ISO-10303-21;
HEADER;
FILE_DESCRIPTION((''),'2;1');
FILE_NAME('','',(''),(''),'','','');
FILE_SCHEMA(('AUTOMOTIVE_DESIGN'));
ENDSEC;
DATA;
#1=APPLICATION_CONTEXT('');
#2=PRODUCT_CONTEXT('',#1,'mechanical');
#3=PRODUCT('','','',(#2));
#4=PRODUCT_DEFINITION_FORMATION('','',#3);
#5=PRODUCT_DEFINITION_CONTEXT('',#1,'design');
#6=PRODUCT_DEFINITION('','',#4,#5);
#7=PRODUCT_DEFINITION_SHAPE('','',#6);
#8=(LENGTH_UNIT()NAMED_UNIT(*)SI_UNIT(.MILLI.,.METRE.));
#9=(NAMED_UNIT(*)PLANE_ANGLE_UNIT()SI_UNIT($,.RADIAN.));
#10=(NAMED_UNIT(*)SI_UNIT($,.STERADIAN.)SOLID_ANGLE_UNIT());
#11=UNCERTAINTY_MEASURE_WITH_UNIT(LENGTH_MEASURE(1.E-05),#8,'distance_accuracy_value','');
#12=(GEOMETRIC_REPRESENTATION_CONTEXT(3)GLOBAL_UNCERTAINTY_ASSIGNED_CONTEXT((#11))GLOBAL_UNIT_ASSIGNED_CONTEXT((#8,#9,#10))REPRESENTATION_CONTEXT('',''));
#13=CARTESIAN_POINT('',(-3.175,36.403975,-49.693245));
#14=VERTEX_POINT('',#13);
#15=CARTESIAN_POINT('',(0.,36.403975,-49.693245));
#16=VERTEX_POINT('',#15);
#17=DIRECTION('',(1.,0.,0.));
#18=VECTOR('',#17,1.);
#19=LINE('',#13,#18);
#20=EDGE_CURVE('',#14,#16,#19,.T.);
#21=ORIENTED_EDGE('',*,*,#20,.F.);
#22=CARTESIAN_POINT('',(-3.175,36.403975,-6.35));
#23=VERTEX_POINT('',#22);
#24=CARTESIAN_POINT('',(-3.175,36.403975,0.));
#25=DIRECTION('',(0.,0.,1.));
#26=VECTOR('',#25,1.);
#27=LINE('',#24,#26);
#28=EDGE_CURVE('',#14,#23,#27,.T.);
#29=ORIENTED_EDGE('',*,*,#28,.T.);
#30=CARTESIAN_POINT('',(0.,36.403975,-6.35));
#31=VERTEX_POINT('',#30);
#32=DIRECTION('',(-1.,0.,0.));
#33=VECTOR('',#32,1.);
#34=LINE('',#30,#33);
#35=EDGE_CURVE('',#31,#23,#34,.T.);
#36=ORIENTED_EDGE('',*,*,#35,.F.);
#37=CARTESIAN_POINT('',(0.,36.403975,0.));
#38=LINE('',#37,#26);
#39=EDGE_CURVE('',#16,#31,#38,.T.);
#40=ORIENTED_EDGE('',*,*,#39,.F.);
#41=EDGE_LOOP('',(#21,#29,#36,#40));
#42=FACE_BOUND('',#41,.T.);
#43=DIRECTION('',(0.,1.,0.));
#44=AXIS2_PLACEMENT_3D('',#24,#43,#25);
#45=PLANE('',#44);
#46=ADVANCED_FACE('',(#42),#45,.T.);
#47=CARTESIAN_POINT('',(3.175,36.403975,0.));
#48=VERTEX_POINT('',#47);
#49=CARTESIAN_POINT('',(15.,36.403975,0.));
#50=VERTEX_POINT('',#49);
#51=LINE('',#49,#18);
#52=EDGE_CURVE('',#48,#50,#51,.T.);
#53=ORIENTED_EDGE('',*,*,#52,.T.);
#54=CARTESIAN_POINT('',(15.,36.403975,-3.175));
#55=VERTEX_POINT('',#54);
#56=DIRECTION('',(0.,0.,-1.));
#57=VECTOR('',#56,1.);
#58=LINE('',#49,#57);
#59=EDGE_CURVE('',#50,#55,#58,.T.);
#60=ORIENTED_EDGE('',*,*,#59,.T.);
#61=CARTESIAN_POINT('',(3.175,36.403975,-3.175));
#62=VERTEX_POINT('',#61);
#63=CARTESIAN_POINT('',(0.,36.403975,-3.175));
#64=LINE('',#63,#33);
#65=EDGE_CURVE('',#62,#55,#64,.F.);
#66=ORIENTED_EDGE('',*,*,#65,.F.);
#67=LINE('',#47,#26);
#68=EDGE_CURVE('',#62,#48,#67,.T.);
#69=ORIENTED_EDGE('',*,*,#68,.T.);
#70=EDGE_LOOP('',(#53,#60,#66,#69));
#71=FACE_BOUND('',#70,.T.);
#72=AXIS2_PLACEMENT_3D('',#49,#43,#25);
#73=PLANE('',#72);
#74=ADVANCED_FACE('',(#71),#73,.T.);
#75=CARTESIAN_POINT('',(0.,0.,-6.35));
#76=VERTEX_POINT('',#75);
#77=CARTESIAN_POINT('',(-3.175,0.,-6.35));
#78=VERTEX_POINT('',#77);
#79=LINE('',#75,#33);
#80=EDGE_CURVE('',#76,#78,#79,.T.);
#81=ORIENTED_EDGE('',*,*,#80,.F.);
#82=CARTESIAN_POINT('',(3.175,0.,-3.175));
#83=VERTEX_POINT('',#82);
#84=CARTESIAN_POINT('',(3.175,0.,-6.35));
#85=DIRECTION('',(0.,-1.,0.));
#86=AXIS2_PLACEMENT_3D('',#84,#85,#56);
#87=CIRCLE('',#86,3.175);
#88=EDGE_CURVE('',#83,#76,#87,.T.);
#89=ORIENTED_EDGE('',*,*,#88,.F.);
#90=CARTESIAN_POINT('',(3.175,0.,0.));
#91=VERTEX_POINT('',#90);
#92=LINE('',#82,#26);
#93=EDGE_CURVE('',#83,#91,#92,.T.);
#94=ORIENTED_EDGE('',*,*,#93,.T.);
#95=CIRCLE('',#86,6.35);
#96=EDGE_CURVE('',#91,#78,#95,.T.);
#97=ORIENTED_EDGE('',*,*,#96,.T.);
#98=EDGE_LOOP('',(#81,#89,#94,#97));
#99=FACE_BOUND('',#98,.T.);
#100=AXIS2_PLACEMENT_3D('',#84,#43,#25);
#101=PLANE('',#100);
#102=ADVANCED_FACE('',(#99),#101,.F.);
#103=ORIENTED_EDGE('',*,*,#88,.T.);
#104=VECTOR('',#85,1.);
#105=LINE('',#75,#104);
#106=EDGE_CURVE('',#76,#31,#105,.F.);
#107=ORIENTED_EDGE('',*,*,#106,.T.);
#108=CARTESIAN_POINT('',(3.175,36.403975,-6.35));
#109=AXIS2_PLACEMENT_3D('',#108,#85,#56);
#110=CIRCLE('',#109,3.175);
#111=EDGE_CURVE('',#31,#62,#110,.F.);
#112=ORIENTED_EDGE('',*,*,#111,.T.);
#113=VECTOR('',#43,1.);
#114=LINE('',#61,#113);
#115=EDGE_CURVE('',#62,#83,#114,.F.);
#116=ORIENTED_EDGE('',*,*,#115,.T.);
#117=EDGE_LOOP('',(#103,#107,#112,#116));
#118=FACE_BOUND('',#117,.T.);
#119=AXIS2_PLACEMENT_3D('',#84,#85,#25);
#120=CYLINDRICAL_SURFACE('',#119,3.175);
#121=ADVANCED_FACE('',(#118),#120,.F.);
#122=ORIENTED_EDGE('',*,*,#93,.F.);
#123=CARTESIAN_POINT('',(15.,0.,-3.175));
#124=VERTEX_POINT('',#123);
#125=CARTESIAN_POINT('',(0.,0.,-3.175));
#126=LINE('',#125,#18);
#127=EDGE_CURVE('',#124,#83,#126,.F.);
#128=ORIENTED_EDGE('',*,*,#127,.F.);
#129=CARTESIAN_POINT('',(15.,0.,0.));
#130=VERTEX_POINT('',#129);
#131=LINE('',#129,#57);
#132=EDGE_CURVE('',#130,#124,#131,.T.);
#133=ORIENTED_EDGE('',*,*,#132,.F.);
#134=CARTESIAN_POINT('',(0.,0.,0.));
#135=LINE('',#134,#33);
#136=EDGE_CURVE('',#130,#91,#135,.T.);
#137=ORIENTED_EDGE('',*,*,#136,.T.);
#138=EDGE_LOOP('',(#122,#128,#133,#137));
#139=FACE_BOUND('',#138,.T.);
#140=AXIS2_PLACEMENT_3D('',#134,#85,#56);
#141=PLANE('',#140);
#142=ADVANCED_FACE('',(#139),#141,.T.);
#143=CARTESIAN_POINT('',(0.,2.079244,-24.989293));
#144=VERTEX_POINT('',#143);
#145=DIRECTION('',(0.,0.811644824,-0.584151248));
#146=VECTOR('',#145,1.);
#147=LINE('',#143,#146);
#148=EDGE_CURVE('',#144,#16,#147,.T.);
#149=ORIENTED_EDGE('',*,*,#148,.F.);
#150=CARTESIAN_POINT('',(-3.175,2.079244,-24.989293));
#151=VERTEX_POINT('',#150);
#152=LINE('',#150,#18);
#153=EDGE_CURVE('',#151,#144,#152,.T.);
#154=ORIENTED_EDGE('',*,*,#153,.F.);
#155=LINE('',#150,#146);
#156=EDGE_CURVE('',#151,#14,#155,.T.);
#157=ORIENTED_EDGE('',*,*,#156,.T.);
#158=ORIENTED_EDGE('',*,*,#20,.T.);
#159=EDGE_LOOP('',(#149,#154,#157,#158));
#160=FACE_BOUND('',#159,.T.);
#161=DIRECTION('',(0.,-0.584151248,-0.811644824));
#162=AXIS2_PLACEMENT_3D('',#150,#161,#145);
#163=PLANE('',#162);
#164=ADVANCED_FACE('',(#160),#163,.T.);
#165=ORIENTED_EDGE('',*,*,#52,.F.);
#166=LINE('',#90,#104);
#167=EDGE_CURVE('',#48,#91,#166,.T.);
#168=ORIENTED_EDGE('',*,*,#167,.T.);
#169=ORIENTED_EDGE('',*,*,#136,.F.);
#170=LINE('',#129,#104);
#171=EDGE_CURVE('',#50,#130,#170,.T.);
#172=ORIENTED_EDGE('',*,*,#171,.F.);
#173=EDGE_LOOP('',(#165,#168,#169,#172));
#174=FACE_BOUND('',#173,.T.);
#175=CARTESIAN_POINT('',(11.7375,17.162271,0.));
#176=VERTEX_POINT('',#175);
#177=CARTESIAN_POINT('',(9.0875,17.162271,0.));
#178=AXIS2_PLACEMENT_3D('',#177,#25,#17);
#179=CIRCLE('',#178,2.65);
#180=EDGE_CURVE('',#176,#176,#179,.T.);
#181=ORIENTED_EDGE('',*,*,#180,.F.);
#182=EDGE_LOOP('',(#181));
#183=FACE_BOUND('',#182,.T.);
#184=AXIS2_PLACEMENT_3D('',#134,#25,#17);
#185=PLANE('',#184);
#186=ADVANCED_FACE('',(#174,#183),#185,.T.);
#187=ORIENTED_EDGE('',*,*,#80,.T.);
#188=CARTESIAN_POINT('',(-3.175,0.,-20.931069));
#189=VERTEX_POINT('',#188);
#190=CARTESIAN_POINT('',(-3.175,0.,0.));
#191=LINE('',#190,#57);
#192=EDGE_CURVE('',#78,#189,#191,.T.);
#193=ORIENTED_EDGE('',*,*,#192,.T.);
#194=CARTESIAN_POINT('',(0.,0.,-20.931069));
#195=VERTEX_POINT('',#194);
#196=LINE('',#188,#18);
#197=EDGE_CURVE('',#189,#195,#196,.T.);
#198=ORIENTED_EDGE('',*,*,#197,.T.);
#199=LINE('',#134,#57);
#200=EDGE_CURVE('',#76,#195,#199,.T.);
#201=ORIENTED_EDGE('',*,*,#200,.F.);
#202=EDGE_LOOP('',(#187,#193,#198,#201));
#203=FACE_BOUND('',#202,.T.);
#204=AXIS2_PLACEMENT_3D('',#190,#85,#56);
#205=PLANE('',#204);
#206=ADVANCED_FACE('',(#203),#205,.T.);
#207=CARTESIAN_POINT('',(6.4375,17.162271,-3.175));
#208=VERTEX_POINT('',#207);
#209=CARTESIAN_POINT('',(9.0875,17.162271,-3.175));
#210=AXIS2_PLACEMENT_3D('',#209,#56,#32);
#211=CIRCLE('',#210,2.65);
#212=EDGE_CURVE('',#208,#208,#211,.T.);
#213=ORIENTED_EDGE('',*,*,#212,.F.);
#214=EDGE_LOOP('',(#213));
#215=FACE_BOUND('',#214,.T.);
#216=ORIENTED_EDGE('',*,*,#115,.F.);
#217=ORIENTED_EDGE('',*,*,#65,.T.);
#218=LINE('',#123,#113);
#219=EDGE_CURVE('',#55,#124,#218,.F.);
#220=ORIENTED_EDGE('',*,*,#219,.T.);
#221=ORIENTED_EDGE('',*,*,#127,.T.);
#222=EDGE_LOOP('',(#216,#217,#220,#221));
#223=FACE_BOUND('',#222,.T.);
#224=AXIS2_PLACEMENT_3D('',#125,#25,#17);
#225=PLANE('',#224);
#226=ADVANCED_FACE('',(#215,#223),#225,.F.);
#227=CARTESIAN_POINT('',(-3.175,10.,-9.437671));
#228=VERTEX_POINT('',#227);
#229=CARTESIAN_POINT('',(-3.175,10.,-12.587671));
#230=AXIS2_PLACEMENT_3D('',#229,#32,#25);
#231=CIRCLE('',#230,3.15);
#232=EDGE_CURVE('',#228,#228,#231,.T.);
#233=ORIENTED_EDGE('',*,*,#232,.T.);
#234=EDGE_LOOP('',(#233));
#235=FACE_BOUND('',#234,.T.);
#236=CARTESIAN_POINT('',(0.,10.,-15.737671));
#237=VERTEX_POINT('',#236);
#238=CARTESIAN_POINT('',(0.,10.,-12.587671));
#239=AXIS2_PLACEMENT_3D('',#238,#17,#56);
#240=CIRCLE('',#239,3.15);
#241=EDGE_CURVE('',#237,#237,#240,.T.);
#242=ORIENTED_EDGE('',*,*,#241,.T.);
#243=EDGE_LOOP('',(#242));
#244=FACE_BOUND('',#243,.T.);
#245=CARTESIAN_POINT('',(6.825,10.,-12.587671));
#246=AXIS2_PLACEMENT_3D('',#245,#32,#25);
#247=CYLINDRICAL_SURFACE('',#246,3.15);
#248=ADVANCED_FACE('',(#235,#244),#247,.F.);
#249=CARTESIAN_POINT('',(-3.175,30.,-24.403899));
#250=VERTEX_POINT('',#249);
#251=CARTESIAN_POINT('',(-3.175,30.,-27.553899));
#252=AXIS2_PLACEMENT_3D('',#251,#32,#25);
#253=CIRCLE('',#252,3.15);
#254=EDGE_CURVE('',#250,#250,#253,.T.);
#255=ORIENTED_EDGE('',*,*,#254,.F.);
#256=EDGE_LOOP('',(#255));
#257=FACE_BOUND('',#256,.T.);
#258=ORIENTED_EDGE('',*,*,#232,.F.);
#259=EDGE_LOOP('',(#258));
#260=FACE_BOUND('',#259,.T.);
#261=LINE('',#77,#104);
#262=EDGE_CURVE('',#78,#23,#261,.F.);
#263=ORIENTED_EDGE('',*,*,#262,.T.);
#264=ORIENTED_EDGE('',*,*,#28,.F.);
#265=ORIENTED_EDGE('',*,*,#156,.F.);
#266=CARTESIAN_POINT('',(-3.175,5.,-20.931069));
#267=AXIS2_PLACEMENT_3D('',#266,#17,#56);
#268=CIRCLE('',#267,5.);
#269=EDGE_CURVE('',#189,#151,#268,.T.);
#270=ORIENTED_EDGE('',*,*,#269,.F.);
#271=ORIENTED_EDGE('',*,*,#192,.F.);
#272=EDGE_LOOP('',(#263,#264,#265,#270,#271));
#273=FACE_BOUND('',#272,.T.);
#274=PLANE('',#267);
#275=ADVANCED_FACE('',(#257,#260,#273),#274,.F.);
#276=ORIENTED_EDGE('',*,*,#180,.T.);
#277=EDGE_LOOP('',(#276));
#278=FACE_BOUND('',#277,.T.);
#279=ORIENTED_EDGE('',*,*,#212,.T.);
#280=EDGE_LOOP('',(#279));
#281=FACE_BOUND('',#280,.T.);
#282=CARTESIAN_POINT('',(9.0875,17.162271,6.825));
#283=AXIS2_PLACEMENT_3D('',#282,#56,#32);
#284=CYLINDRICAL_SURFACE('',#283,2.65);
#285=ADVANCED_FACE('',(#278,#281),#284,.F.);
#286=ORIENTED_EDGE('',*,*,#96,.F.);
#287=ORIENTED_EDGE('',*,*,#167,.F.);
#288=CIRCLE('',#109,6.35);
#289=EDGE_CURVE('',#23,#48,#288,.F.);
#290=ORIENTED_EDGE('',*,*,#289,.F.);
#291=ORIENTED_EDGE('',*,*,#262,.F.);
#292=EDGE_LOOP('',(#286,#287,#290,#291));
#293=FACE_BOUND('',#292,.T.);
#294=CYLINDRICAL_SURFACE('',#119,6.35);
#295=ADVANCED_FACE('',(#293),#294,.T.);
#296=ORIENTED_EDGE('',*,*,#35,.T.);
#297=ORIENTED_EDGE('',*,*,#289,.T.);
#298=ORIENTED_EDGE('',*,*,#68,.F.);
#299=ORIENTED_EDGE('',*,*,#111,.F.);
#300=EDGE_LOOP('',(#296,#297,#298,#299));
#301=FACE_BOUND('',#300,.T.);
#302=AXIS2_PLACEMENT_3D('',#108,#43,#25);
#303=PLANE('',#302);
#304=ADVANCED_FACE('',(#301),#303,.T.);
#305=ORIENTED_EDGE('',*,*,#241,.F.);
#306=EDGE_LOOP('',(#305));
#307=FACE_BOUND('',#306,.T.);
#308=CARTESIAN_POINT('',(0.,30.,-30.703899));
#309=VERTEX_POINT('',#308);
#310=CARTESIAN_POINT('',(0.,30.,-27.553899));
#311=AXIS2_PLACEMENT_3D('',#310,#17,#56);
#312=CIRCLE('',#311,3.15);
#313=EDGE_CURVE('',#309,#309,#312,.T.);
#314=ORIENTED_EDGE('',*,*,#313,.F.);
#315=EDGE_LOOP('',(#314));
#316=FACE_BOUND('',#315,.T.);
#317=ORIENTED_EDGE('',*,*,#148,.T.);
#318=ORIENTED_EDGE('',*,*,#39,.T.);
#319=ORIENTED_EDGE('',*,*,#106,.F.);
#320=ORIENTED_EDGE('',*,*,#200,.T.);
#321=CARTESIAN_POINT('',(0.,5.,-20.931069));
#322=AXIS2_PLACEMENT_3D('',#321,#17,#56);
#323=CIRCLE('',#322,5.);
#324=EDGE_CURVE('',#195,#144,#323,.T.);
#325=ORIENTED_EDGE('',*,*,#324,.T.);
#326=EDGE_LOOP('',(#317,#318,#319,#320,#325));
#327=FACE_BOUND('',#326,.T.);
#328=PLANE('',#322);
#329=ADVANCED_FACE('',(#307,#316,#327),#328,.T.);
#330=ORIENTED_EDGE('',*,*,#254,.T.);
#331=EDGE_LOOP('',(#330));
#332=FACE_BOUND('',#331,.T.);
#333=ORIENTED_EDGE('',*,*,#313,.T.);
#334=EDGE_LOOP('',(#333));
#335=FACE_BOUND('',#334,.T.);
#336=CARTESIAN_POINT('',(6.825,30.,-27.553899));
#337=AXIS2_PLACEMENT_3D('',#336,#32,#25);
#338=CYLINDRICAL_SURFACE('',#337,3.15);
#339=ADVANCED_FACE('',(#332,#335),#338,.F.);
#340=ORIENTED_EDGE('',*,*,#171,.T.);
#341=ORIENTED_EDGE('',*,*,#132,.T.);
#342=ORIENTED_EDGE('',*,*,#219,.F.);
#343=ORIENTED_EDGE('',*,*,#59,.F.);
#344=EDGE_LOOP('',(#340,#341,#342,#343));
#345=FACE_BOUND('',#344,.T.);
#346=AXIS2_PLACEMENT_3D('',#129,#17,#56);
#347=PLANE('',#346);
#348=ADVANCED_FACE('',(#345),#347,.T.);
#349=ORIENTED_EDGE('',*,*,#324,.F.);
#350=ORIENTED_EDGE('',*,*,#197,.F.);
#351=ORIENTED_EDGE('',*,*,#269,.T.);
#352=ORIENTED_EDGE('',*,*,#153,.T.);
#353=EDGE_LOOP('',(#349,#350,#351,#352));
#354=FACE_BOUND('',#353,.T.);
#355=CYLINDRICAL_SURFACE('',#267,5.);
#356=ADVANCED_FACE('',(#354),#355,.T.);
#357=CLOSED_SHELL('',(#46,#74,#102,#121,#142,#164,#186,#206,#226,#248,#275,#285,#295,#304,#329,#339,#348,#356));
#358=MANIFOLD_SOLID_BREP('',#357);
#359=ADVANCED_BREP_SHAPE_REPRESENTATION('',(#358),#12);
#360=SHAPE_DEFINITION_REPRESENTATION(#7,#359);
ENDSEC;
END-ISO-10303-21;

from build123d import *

# Parameters (mm, degrees)
BASE_FLANGE1_DEPTH           = 3.175
SKETCH7_R                    = 3.15
CUT_EXTRUDE3_DEPTH           = 10
EDGE_FLANGE1_STRIP_W         = 19.05
EDGE_FLANGE1_STRIP_H         = 3.175
EDGE_FLANGE1_STRIP_CUT_DEPTH = 36.40397533
EDGE_FLANGE1_DEPTH           = 36.40397533
SKETCH12_R                   = 2.65
CUT_EXTRUDE4_DEPTH           = 10


# Sheet-metal steps are written as plain solids
with BuildPart() as part:
    # Sketch2 → Base-Flange1 (new body)
    with BuildSketch(Plane(origin=(0, 0, 0), x_dir=(0, 0, -1), z_dir=(1, 0, 0))):
        with BuildLine():
            Line((0, 0), (0, 36.40397533))
            Line((0, 36.40397533), (49.693245392, 36.40397533))
            Line((49.693245392, 36.40397533), (24.989293369, 2.07924376))
            ThreePointArc((24.989293369, 2.07924376), (23.211005522, 0.550068473), (20.931069251, 0))
            Line((20.931069251, 0), (0, 0))
        make_face()
    extrude(amount=-BASE_FLANGE1_DEPTH)

    # Sketch7 → Cut-Extrude3 (cut)
    with BuildSketch(Plane.ZY.offset(3.175)):
        with Locations((-27.553898694, 30)):
            Circle(SKETCH7_R)
        with Locations((-12.587671369, 10)):
            Circle(SKETCH7_R)
    extrude(amount=-CUT_EXTRUDE3_DEPTH, mode=Mode.SUBTRACT)

    # Edge-Flange1 strip (across the edge) → Edge-Flange1 strip cut (cut)
    with BuildSketch(Plane(origin=(0, 36.40397533, 0), x_dir=(0, 0, -1), z_dir=(0, -1, 0))):
        with Locations((-3.175, -1.5875)):
            Rectangle(EDGE_FLANGE1_STRIP_W, EDGE_FLANGE1_STRIP_H)
    extrude(amount=EDGE_FLANGE1_STRIP_CUT_DEPTH, mode=Mode.SUBTRACT)

    # Edge-Flange1 section (across the edge) → Edge-Flange1 (add)
    with BuildSketch(Plane(origin=(0, 36.40397533, 0), x_dir=(0, 0, -1), z_dir=(0, -1, 0))):
        with BuildLine():
            Line((0, 3.175), (0, 15))
            Line((0, 15), (3.175, 15))
            Line((3.175, 15), (3.175, 3.175))
            ThreePointArc((3.175, 3.175), (4.10493597, 0.92993597), (6.35, 0))
            Line((6.35, 0), (6.35, -3.175))
            ThreePointArc((6.35, -3.175), (1.859871939, -1.315128061), (0, 3.175))
        make_face()
    extrude(amount=EDGE_FLANGE1_DEPTH)

    # Sketch12 → Cut-Extrude4 (cut)
    with BuildSketch(Plane(origin=(0, 0, -3.175), x_dir=(-1, 0, 0), z_dir=(0, 0, -1))):
        with Locations((-9.0875, 17.162271256)):
            Circle(SKETCH12_R)
    extrude(amount=-CUT_EXTRUDE4_DEPTH, mode=Mode.SUBTRACT)


solid = part.part
